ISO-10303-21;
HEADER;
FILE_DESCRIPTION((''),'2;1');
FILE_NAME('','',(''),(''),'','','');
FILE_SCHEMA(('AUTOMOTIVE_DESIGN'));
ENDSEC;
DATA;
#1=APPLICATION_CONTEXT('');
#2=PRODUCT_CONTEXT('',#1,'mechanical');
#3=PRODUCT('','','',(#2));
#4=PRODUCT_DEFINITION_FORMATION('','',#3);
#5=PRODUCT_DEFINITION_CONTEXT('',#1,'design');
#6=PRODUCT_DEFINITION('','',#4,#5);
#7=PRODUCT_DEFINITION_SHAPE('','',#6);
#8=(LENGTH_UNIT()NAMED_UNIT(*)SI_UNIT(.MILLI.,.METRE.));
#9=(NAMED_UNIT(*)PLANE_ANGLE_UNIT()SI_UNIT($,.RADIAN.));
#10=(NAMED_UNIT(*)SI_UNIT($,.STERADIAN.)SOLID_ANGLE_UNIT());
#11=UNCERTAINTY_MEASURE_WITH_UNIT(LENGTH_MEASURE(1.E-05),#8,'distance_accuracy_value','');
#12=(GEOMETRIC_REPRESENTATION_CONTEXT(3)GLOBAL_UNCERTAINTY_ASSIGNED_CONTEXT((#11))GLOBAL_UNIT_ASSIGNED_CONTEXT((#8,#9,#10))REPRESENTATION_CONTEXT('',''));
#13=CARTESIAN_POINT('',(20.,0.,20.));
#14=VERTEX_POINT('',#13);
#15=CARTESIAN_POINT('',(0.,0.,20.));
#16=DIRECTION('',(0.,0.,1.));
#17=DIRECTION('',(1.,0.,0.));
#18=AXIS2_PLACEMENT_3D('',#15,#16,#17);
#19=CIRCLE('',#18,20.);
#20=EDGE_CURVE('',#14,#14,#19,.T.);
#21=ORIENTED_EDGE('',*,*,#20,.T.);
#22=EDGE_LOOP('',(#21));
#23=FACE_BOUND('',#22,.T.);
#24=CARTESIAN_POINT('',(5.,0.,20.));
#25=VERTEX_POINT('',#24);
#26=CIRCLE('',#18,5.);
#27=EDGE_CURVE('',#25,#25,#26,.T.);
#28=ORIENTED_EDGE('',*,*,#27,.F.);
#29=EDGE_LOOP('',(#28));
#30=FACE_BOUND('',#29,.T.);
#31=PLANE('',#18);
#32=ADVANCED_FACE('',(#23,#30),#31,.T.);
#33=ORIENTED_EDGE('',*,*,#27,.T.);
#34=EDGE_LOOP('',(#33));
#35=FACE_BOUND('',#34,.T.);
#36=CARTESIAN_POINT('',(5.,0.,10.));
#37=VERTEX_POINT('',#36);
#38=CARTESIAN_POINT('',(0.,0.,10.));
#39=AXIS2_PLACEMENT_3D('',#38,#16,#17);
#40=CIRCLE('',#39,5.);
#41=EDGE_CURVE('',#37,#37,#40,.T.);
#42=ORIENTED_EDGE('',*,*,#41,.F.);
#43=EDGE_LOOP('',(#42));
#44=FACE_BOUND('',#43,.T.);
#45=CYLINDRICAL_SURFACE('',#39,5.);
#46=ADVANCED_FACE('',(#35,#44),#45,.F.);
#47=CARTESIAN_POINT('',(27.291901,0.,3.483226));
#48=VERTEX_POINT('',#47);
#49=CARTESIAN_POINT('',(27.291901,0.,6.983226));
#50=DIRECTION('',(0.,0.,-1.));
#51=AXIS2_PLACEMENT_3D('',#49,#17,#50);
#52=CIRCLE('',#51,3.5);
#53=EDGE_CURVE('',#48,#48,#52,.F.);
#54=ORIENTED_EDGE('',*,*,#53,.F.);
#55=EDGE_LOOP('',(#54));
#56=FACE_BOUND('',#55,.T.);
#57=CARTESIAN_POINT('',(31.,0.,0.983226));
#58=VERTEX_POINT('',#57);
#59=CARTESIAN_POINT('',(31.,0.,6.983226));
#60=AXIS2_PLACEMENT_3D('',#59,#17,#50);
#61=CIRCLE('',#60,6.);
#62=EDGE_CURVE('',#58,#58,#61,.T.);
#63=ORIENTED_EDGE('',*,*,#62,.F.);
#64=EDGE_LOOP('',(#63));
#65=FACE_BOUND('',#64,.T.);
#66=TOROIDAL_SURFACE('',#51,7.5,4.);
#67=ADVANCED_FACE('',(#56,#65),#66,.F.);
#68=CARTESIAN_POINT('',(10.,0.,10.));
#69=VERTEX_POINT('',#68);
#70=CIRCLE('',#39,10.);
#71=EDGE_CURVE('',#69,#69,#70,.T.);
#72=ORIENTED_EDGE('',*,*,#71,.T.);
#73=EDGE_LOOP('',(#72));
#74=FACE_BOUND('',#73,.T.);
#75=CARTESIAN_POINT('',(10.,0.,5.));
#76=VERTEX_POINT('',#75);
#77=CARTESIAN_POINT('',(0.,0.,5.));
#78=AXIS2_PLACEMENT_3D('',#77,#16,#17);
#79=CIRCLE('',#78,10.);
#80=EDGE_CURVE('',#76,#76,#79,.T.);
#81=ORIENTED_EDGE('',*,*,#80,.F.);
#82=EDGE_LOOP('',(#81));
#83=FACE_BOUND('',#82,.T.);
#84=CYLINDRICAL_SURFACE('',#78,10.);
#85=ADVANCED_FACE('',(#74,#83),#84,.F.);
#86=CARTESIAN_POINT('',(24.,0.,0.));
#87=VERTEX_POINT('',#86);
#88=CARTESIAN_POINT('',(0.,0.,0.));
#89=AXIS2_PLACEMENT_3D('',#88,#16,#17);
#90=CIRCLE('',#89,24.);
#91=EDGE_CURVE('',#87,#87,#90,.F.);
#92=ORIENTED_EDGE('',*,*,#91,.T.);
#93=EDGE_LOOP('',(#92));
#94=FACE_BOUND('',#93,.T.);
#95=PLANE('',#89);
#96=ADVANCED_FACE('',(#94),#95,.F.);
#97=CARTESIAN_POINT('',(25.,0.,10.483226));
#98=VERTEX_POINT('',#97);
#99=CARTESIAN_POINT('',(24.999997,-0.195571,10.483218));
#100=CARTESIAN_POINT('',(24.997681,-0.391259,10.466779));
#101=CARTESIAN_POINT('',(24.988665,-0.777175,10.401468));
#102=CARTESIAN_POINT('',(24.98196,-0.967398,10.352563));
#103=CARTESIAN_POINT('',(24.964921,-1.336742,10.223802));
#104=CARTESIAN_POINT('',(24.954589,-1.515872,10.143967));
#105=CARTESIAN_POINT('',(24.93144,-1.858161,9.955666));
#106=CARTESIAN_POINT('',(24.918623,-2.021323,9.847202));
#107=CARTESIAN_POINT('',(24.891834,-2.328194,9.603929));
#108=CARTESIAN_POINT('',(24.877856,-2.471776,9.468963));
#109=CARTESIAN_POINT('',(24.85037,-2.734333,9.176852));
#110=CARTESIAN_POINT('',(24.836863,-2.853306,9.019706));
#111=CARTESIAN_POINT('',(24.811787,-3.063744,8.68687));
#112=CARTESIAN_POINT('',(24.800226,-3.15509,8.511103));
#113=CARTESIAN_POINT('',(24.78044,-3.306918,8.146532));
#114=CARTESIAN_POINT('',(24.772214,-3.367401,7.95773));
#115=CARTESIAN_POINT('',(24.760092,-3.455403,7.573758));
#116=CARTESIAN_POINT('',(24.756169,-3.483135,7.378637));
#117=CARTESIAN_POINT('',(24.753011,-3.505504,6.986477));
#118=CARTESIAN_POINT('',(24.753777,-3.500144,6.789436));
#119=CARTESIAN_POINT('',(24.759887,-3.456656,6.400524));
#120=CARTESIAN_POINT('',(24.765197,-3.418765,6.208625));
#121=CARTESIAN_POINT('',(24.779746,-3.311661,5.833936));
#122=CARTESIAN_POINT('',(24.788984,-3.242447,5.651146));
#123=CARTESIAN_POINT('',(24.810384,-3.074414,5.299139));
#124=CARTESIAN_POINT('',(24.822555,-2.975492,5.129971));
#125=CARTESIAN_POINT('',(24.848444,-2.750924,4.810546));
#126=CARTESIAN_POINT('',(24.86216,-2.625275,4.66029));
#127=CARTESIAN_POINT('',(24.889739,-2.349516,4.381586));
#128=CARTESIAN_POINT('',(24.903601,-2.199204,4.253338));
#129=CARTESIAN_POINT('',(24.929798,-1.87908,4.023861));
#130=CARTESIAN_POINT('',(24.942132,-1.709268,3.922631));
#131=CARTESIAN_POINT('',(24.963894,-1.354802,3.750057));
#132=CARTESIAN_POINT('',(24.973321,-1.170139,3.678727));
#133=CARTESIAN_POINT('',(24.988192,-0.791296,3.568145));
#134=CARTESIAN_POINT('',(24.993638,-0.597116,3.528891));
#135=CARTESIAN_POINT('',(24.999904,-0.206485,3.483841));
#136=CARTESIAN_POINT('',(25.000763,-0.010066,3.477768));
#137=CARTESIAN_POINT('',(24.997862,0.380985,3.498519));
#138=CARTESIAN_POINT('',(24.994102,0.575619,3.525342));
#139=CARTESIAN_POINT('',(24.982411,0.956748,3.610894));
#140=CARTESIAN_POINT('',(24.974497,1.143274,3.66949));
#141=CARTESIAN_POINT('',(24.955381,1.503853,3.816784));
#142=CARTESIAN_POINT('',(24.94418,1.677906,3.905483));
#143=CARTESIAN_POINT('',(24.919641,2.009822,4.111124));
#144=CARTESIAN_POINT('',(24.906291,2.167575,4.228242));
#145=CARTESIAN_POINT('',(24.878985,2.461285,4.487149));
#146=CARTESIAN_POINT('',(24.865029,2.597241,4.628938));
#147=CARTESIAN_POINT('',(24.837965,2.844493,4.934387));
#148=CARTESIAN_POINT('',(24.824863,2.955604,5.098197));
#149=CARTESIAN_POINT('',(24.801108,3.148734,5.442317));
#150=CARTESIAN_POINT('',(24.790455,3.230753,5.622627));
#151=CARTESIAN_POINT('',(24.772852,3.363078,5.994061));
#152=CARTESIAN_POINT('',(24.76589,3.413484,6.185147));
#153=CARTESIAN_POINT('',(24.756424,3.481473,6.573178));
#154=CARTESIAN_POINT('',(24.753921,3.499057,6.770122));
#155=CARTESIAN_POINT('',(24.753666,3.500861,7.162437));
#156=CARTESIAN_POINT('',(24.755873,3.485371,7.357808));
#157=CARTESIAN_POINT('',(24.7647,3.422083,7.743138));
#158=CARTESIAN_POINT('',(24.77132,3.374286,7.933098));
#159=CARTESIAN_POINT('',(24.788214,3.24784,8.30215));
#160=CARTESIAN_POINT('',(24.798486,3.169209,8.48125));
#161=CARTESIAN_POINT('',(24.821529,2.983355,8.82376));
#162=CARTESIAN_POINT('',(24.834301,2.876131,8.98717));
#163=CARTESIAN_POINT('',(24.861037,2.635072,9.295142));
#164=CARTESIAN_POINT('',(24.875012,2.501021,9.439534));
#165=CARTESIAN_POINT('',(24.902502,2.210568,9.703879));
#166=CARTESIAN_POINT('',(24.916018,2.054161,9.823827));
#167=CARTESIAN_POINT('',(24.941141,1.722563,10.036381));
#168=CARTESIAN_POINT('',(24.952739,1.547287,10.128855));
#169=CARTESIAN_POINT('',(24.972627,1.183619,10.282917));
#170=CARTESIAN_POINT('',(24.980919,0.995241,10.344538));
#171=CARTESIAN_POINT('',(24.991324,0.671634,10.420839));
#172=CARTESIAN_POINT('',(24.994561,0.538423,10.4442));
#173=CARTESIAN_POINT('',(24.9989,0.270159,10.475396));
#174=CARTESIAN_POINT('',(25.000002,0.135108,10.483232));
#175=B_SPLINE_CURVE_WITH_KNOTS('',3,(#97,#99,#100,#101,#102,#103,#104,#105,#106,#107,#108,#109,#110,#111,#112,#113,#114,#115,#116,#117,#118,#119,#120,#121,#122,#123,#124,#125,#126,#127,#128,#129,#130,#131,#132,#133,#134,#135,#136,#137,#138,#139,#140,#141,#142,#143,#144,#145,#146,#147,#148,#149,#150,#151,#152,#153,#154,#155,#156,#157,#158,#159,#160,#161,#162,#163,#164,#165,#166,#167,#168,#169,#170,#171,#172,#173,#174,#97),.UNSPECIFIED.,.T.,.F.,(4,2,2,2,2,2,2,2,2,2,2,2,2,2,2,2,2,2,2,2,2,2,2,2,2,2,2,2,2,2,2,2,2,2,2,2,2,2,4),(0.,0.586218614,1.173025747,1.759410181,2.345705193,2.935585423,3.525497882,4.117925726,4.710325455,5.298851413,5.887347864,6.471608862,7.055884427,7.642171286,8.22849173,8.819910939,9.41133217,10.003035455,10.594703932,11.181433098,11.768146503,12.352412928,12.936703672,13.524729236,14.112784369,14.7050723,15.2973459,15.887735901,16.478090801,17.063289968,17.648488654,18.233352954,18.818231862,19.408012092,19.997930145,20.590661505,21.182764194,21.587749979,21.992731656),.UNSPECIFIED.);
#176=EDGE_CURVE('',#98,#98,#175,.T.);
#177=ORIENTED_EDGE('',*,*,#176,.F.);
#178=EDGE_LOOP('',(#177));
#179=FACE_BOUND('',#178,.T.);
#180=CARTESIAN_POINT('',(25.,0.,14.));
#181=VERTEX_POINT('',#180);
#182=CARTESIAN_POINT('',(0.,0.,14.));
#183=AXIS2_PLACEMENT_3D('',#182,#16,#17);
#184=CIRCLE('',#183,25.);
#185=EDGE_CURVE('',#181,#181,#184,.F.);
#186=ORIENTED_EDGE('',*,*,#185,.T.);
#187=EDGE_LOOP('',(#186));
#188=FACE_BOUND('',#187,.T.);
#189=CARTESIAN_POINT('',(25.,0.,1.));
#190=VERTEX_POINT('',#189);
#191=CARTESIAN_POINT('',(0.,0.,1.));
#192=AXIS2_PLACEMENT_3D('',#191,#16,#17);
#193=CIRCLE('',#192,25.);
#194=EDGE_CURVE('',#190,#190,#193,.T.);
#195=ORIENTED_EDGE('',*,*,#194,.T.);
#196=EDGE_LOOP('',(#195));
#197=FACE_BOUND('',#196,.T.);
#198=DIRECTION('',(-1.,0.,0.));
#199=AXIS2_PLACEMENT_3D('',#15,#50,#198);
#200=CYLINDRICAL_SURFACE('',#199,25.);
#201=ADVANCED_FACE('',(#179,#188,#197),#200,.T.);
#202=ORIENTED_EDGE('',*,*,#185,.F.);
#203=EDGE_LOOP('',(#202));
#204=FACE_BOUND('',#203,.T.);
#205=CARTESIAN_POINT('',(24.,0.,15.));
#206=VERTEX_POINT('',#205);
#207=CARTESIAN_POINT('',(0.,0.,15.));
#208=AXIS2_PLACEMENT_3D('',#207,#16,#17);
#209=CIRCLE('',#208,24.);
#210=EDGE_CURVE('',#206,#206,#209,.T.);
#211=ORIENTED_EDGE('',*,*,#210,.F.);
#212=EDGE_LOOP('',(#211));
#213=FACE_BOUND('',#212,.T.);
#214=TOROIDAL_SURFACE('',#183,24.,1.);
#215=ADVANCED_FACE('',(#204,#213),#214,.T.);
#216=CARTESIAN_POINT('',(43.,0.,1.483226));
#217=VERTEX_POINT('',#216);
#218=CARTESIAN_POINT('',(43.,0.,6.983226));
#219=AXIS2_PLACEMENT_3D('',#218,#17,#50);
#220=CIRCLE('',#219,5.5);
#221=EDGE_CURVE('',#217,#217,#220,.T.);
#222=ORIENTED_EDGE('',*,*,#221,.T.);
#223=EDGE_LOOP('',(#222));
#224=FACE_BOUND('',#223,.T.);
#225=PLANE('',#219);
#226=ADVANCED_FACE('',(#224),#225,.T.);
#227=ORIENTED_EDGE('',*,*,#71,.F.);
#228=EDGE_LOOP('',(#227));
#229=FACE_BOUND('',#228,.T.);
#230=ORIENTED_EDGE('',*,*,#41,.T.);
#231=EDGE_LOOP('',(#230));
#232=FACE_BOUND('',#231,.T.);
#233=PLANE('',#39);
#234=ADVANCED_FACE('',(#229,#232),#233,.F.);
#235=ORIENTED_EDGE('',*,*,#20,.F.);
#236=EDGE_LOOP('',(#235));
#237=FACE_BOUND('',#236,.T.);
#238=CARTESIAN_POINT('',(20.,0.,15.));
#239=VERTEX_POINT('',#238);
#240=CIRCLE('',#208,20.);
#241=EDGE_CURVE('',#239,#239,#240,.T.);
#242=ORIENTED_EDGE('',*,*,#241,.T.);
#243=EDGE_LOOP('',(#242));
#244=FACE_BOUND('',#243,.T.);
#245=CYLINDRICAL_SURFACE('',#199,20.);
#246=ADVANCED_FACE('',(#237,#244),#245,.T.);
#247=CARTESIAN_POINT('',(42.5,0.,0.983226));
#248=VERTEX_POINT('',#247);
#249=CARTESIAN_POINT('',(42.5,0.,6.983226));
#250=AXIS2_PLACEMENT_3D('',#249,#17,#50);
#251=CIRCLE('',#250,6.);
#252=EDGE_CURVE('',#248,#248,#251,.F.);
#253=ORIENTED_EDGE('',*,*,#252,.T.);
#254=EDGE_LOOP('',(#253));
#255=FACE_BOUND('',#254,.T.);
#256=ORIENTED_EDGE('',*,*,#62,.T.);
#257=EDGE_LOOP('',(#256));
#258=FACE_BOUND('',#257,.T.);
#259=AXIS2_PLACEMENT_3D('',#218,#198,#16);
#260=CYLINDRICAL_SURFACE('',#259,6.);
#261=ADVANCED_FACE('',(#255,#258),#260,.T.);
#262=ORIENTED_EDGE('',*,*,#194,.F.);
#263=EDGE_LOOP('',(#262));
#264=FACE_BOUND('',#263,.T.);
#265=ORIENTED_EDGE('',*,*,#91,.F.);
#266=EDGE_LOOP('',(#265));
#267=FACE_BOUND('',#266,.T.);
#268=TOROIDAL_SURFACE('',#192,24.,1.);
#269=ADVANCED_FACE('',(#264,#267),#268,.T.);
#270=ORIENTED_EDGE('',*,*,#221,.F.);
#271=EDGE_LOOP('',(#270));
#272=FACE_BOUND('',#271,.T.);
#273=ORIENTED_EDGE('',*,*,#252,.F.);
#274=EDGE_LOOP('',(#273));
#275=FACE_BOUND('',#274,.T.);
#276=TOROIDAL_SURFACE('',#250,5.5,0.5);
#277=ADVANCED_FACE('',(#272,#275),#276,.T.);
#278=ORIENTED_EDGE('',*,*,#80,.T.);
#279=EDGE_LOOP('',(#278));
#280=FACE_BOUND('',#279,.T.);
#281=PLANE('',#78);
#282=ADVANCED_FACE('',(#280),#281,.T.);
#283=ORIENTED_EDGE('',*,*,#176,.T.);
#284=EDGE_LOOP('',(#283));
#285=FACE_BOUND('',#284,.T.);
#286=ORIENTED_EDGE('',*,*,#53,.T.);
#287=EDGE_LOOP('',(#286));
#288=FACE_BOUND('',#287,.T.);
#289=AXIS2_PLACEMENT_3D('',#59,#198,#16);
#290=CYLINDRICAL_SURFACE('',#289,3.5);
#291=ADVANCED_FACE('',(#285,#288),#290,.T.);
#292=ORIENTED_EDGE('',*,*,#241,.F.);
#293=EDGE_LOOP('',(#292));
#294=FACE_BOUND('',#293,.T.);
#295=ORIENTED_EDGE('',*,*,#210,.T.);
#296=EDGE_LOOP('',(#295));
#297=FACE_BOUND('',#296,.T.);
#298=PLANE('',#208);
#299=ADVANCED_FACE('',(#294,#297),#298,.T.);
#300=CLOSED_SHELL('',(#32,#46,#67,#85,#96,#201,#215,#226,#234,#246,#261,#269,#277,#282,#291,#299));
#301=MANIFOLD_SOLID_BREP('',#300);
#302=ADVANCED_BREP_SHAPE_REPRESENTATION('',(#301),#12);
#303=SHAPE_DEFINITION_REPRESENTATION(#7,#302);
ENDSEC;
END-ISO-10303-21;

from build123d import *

# Parameters (mm, degrees)
SKETCH_1_R          = 25
EXTRUDE_1_DEPTH     = 20
SKETCH_2_R          = 5
CUT_EXTRUDE_1_DEPTH = 10
SKETCH_3_R          = 10
CUT_EXTRUDE_2_DEPTH = 5
CUT_EXTRUDE_START   = -5
SKETCH_4_R          = 25
CUT_EXTRUDE_3_DEPTH = 5
EXTRUDE_START       = 5
SKETCH_5_R          = 20
SKETCH_5_R_2        = 5
EXTRUDE_2_DEPTH     = 5
SKETCH_6_R          = 3.5
EXTRUDE_3_DEPTH     = 7
SKETCH_7_R          = 6
EXTRUDE_4_DEPTH     = 12
FILLET_1_R          = 4
FILLET_2_R          = 0.5
FILLET_3_R          = 1
FILLET_4_R          = 1


with BuildPart() as part:
    # 草图1 → 凸台-拉伸1 (new body)
    with BuildSketch(Plane.XY):
        Circle(SKETCH_1_R)
    extrude(amount=EXTRUDE_1_DEPTH)

    # 草图2 → 切除-拉伸1 (cut)
    with BuildSketch(Plane.XY.offset(20)):
        Circle(SKETCH_2_R)
    extrude(amount=-CUT_EXTRUDE_1_DEPTH, mode=Mode.SUBTRACT)

    # 草图3 → 切除-拉伸2 (cut)
    with BuildSketch(Plane.XY.offset(10)):
        Circle(SKETCH_3_R)
    extrude(amount=-CUT_EXTRUDE_2_DEPTH, mode=Mode.SUBTRACT)

    # 草图4 → 切除-拉伸3 (cut)
    with BuildSketch(Plane.XY.offset(20).offset(CUT_EXTRUDE_START)):
        Circle(SKETCH_4_R)
    extrude(amount=CUT_EXTRUDE_3_DEPTH, mode=Mode.SUBTRACT)

    # 草图5 → 凸台-拉伸2 (add)
    with BuildSketch(Plane.XY.offset(15).offset(EXTRUDE_START)):
        Circle(SKETCH_5_R)
        Circle(SKETCH_5_R_2, mode=Mode.SUBTRACT)
    extrude(amount=-EXTRUDE_2_DEPTH)

    # 草图6 → 凸台-拉伸3 (add)
    with BuildSketch(Plane(origin=(24, 0, 0), x_dir=(0, 0, -1), z_dir=(1, 0, 0))):
        with Locations((-6.983226233, 0)):
            Circle(SKETCH_6_R)
    extrude(amount=EXTRUDE_3_DEPTH)

    # 草图7 → 凸台-拉伸4 (add)
    with BuildSketch(Plane(origin=(31, 0, 0), x_dir=(0, 0, -1), z_dir=(1, 0, 0))):
        with Locations((-6.983226233, 0)):
            Circle(SKETCH_7_R)
    extrude(amount=EXTRUDE_4_DEPTH)

    # 圆角1
    # the kernel refuses this fillet: 4 mm, written as the material it adds along each edge
    with BuildSketch(Plane(origin=(31, 0, 6.983226233), x_dir=(0, 0, -1), z_dir=(0, -1, 0))) as fillet_1_piece_1:
        with BuildLine():
            CenterArc((7.5, -3.708099244), FILLET_1_R, 112.024312837, 67.975687163)
            Line((3.5, -3.708099244), (3.42, -3.708099244))
            Line((3.42, -3.708099244), (3.42, 0))
            Line((3.42, 0), (3.5, 0.08))
            ThreePointArc((3.5, 0.08), (4.75, 0.08), (5.97, 0.074161985))
            Line((5.97, 0.074161985), (6, 0))
        make_face()
    revolve(axis=Axis((31, 0, 6.983226233), (1, 0, 0)))

    # 圆角2
    fillet_2_edges = [part.edges().sort_by_distance(p)[0] for p in [
        (43, 0, 12.983226233),
    ]]
    fillet(fillet_2_edges, radius=FILLET_2_R)

    # 圆角3
    fillet_3_edges = [part.edges().sort_by_distance(p)[0] for p in [
        (-25, 0, 0),
    ]]
    fillet(fillet_3_edges, radius=FILLET_3_R)

    # 圆角4
    fillet_4_edges = [part.edges().sort_by_distance(p)[0] for p in [
        (-25, 0, 15),
    ]]
    fillet(fillet_4_edges, radius=FILLET_4_R)


solid = part.part
